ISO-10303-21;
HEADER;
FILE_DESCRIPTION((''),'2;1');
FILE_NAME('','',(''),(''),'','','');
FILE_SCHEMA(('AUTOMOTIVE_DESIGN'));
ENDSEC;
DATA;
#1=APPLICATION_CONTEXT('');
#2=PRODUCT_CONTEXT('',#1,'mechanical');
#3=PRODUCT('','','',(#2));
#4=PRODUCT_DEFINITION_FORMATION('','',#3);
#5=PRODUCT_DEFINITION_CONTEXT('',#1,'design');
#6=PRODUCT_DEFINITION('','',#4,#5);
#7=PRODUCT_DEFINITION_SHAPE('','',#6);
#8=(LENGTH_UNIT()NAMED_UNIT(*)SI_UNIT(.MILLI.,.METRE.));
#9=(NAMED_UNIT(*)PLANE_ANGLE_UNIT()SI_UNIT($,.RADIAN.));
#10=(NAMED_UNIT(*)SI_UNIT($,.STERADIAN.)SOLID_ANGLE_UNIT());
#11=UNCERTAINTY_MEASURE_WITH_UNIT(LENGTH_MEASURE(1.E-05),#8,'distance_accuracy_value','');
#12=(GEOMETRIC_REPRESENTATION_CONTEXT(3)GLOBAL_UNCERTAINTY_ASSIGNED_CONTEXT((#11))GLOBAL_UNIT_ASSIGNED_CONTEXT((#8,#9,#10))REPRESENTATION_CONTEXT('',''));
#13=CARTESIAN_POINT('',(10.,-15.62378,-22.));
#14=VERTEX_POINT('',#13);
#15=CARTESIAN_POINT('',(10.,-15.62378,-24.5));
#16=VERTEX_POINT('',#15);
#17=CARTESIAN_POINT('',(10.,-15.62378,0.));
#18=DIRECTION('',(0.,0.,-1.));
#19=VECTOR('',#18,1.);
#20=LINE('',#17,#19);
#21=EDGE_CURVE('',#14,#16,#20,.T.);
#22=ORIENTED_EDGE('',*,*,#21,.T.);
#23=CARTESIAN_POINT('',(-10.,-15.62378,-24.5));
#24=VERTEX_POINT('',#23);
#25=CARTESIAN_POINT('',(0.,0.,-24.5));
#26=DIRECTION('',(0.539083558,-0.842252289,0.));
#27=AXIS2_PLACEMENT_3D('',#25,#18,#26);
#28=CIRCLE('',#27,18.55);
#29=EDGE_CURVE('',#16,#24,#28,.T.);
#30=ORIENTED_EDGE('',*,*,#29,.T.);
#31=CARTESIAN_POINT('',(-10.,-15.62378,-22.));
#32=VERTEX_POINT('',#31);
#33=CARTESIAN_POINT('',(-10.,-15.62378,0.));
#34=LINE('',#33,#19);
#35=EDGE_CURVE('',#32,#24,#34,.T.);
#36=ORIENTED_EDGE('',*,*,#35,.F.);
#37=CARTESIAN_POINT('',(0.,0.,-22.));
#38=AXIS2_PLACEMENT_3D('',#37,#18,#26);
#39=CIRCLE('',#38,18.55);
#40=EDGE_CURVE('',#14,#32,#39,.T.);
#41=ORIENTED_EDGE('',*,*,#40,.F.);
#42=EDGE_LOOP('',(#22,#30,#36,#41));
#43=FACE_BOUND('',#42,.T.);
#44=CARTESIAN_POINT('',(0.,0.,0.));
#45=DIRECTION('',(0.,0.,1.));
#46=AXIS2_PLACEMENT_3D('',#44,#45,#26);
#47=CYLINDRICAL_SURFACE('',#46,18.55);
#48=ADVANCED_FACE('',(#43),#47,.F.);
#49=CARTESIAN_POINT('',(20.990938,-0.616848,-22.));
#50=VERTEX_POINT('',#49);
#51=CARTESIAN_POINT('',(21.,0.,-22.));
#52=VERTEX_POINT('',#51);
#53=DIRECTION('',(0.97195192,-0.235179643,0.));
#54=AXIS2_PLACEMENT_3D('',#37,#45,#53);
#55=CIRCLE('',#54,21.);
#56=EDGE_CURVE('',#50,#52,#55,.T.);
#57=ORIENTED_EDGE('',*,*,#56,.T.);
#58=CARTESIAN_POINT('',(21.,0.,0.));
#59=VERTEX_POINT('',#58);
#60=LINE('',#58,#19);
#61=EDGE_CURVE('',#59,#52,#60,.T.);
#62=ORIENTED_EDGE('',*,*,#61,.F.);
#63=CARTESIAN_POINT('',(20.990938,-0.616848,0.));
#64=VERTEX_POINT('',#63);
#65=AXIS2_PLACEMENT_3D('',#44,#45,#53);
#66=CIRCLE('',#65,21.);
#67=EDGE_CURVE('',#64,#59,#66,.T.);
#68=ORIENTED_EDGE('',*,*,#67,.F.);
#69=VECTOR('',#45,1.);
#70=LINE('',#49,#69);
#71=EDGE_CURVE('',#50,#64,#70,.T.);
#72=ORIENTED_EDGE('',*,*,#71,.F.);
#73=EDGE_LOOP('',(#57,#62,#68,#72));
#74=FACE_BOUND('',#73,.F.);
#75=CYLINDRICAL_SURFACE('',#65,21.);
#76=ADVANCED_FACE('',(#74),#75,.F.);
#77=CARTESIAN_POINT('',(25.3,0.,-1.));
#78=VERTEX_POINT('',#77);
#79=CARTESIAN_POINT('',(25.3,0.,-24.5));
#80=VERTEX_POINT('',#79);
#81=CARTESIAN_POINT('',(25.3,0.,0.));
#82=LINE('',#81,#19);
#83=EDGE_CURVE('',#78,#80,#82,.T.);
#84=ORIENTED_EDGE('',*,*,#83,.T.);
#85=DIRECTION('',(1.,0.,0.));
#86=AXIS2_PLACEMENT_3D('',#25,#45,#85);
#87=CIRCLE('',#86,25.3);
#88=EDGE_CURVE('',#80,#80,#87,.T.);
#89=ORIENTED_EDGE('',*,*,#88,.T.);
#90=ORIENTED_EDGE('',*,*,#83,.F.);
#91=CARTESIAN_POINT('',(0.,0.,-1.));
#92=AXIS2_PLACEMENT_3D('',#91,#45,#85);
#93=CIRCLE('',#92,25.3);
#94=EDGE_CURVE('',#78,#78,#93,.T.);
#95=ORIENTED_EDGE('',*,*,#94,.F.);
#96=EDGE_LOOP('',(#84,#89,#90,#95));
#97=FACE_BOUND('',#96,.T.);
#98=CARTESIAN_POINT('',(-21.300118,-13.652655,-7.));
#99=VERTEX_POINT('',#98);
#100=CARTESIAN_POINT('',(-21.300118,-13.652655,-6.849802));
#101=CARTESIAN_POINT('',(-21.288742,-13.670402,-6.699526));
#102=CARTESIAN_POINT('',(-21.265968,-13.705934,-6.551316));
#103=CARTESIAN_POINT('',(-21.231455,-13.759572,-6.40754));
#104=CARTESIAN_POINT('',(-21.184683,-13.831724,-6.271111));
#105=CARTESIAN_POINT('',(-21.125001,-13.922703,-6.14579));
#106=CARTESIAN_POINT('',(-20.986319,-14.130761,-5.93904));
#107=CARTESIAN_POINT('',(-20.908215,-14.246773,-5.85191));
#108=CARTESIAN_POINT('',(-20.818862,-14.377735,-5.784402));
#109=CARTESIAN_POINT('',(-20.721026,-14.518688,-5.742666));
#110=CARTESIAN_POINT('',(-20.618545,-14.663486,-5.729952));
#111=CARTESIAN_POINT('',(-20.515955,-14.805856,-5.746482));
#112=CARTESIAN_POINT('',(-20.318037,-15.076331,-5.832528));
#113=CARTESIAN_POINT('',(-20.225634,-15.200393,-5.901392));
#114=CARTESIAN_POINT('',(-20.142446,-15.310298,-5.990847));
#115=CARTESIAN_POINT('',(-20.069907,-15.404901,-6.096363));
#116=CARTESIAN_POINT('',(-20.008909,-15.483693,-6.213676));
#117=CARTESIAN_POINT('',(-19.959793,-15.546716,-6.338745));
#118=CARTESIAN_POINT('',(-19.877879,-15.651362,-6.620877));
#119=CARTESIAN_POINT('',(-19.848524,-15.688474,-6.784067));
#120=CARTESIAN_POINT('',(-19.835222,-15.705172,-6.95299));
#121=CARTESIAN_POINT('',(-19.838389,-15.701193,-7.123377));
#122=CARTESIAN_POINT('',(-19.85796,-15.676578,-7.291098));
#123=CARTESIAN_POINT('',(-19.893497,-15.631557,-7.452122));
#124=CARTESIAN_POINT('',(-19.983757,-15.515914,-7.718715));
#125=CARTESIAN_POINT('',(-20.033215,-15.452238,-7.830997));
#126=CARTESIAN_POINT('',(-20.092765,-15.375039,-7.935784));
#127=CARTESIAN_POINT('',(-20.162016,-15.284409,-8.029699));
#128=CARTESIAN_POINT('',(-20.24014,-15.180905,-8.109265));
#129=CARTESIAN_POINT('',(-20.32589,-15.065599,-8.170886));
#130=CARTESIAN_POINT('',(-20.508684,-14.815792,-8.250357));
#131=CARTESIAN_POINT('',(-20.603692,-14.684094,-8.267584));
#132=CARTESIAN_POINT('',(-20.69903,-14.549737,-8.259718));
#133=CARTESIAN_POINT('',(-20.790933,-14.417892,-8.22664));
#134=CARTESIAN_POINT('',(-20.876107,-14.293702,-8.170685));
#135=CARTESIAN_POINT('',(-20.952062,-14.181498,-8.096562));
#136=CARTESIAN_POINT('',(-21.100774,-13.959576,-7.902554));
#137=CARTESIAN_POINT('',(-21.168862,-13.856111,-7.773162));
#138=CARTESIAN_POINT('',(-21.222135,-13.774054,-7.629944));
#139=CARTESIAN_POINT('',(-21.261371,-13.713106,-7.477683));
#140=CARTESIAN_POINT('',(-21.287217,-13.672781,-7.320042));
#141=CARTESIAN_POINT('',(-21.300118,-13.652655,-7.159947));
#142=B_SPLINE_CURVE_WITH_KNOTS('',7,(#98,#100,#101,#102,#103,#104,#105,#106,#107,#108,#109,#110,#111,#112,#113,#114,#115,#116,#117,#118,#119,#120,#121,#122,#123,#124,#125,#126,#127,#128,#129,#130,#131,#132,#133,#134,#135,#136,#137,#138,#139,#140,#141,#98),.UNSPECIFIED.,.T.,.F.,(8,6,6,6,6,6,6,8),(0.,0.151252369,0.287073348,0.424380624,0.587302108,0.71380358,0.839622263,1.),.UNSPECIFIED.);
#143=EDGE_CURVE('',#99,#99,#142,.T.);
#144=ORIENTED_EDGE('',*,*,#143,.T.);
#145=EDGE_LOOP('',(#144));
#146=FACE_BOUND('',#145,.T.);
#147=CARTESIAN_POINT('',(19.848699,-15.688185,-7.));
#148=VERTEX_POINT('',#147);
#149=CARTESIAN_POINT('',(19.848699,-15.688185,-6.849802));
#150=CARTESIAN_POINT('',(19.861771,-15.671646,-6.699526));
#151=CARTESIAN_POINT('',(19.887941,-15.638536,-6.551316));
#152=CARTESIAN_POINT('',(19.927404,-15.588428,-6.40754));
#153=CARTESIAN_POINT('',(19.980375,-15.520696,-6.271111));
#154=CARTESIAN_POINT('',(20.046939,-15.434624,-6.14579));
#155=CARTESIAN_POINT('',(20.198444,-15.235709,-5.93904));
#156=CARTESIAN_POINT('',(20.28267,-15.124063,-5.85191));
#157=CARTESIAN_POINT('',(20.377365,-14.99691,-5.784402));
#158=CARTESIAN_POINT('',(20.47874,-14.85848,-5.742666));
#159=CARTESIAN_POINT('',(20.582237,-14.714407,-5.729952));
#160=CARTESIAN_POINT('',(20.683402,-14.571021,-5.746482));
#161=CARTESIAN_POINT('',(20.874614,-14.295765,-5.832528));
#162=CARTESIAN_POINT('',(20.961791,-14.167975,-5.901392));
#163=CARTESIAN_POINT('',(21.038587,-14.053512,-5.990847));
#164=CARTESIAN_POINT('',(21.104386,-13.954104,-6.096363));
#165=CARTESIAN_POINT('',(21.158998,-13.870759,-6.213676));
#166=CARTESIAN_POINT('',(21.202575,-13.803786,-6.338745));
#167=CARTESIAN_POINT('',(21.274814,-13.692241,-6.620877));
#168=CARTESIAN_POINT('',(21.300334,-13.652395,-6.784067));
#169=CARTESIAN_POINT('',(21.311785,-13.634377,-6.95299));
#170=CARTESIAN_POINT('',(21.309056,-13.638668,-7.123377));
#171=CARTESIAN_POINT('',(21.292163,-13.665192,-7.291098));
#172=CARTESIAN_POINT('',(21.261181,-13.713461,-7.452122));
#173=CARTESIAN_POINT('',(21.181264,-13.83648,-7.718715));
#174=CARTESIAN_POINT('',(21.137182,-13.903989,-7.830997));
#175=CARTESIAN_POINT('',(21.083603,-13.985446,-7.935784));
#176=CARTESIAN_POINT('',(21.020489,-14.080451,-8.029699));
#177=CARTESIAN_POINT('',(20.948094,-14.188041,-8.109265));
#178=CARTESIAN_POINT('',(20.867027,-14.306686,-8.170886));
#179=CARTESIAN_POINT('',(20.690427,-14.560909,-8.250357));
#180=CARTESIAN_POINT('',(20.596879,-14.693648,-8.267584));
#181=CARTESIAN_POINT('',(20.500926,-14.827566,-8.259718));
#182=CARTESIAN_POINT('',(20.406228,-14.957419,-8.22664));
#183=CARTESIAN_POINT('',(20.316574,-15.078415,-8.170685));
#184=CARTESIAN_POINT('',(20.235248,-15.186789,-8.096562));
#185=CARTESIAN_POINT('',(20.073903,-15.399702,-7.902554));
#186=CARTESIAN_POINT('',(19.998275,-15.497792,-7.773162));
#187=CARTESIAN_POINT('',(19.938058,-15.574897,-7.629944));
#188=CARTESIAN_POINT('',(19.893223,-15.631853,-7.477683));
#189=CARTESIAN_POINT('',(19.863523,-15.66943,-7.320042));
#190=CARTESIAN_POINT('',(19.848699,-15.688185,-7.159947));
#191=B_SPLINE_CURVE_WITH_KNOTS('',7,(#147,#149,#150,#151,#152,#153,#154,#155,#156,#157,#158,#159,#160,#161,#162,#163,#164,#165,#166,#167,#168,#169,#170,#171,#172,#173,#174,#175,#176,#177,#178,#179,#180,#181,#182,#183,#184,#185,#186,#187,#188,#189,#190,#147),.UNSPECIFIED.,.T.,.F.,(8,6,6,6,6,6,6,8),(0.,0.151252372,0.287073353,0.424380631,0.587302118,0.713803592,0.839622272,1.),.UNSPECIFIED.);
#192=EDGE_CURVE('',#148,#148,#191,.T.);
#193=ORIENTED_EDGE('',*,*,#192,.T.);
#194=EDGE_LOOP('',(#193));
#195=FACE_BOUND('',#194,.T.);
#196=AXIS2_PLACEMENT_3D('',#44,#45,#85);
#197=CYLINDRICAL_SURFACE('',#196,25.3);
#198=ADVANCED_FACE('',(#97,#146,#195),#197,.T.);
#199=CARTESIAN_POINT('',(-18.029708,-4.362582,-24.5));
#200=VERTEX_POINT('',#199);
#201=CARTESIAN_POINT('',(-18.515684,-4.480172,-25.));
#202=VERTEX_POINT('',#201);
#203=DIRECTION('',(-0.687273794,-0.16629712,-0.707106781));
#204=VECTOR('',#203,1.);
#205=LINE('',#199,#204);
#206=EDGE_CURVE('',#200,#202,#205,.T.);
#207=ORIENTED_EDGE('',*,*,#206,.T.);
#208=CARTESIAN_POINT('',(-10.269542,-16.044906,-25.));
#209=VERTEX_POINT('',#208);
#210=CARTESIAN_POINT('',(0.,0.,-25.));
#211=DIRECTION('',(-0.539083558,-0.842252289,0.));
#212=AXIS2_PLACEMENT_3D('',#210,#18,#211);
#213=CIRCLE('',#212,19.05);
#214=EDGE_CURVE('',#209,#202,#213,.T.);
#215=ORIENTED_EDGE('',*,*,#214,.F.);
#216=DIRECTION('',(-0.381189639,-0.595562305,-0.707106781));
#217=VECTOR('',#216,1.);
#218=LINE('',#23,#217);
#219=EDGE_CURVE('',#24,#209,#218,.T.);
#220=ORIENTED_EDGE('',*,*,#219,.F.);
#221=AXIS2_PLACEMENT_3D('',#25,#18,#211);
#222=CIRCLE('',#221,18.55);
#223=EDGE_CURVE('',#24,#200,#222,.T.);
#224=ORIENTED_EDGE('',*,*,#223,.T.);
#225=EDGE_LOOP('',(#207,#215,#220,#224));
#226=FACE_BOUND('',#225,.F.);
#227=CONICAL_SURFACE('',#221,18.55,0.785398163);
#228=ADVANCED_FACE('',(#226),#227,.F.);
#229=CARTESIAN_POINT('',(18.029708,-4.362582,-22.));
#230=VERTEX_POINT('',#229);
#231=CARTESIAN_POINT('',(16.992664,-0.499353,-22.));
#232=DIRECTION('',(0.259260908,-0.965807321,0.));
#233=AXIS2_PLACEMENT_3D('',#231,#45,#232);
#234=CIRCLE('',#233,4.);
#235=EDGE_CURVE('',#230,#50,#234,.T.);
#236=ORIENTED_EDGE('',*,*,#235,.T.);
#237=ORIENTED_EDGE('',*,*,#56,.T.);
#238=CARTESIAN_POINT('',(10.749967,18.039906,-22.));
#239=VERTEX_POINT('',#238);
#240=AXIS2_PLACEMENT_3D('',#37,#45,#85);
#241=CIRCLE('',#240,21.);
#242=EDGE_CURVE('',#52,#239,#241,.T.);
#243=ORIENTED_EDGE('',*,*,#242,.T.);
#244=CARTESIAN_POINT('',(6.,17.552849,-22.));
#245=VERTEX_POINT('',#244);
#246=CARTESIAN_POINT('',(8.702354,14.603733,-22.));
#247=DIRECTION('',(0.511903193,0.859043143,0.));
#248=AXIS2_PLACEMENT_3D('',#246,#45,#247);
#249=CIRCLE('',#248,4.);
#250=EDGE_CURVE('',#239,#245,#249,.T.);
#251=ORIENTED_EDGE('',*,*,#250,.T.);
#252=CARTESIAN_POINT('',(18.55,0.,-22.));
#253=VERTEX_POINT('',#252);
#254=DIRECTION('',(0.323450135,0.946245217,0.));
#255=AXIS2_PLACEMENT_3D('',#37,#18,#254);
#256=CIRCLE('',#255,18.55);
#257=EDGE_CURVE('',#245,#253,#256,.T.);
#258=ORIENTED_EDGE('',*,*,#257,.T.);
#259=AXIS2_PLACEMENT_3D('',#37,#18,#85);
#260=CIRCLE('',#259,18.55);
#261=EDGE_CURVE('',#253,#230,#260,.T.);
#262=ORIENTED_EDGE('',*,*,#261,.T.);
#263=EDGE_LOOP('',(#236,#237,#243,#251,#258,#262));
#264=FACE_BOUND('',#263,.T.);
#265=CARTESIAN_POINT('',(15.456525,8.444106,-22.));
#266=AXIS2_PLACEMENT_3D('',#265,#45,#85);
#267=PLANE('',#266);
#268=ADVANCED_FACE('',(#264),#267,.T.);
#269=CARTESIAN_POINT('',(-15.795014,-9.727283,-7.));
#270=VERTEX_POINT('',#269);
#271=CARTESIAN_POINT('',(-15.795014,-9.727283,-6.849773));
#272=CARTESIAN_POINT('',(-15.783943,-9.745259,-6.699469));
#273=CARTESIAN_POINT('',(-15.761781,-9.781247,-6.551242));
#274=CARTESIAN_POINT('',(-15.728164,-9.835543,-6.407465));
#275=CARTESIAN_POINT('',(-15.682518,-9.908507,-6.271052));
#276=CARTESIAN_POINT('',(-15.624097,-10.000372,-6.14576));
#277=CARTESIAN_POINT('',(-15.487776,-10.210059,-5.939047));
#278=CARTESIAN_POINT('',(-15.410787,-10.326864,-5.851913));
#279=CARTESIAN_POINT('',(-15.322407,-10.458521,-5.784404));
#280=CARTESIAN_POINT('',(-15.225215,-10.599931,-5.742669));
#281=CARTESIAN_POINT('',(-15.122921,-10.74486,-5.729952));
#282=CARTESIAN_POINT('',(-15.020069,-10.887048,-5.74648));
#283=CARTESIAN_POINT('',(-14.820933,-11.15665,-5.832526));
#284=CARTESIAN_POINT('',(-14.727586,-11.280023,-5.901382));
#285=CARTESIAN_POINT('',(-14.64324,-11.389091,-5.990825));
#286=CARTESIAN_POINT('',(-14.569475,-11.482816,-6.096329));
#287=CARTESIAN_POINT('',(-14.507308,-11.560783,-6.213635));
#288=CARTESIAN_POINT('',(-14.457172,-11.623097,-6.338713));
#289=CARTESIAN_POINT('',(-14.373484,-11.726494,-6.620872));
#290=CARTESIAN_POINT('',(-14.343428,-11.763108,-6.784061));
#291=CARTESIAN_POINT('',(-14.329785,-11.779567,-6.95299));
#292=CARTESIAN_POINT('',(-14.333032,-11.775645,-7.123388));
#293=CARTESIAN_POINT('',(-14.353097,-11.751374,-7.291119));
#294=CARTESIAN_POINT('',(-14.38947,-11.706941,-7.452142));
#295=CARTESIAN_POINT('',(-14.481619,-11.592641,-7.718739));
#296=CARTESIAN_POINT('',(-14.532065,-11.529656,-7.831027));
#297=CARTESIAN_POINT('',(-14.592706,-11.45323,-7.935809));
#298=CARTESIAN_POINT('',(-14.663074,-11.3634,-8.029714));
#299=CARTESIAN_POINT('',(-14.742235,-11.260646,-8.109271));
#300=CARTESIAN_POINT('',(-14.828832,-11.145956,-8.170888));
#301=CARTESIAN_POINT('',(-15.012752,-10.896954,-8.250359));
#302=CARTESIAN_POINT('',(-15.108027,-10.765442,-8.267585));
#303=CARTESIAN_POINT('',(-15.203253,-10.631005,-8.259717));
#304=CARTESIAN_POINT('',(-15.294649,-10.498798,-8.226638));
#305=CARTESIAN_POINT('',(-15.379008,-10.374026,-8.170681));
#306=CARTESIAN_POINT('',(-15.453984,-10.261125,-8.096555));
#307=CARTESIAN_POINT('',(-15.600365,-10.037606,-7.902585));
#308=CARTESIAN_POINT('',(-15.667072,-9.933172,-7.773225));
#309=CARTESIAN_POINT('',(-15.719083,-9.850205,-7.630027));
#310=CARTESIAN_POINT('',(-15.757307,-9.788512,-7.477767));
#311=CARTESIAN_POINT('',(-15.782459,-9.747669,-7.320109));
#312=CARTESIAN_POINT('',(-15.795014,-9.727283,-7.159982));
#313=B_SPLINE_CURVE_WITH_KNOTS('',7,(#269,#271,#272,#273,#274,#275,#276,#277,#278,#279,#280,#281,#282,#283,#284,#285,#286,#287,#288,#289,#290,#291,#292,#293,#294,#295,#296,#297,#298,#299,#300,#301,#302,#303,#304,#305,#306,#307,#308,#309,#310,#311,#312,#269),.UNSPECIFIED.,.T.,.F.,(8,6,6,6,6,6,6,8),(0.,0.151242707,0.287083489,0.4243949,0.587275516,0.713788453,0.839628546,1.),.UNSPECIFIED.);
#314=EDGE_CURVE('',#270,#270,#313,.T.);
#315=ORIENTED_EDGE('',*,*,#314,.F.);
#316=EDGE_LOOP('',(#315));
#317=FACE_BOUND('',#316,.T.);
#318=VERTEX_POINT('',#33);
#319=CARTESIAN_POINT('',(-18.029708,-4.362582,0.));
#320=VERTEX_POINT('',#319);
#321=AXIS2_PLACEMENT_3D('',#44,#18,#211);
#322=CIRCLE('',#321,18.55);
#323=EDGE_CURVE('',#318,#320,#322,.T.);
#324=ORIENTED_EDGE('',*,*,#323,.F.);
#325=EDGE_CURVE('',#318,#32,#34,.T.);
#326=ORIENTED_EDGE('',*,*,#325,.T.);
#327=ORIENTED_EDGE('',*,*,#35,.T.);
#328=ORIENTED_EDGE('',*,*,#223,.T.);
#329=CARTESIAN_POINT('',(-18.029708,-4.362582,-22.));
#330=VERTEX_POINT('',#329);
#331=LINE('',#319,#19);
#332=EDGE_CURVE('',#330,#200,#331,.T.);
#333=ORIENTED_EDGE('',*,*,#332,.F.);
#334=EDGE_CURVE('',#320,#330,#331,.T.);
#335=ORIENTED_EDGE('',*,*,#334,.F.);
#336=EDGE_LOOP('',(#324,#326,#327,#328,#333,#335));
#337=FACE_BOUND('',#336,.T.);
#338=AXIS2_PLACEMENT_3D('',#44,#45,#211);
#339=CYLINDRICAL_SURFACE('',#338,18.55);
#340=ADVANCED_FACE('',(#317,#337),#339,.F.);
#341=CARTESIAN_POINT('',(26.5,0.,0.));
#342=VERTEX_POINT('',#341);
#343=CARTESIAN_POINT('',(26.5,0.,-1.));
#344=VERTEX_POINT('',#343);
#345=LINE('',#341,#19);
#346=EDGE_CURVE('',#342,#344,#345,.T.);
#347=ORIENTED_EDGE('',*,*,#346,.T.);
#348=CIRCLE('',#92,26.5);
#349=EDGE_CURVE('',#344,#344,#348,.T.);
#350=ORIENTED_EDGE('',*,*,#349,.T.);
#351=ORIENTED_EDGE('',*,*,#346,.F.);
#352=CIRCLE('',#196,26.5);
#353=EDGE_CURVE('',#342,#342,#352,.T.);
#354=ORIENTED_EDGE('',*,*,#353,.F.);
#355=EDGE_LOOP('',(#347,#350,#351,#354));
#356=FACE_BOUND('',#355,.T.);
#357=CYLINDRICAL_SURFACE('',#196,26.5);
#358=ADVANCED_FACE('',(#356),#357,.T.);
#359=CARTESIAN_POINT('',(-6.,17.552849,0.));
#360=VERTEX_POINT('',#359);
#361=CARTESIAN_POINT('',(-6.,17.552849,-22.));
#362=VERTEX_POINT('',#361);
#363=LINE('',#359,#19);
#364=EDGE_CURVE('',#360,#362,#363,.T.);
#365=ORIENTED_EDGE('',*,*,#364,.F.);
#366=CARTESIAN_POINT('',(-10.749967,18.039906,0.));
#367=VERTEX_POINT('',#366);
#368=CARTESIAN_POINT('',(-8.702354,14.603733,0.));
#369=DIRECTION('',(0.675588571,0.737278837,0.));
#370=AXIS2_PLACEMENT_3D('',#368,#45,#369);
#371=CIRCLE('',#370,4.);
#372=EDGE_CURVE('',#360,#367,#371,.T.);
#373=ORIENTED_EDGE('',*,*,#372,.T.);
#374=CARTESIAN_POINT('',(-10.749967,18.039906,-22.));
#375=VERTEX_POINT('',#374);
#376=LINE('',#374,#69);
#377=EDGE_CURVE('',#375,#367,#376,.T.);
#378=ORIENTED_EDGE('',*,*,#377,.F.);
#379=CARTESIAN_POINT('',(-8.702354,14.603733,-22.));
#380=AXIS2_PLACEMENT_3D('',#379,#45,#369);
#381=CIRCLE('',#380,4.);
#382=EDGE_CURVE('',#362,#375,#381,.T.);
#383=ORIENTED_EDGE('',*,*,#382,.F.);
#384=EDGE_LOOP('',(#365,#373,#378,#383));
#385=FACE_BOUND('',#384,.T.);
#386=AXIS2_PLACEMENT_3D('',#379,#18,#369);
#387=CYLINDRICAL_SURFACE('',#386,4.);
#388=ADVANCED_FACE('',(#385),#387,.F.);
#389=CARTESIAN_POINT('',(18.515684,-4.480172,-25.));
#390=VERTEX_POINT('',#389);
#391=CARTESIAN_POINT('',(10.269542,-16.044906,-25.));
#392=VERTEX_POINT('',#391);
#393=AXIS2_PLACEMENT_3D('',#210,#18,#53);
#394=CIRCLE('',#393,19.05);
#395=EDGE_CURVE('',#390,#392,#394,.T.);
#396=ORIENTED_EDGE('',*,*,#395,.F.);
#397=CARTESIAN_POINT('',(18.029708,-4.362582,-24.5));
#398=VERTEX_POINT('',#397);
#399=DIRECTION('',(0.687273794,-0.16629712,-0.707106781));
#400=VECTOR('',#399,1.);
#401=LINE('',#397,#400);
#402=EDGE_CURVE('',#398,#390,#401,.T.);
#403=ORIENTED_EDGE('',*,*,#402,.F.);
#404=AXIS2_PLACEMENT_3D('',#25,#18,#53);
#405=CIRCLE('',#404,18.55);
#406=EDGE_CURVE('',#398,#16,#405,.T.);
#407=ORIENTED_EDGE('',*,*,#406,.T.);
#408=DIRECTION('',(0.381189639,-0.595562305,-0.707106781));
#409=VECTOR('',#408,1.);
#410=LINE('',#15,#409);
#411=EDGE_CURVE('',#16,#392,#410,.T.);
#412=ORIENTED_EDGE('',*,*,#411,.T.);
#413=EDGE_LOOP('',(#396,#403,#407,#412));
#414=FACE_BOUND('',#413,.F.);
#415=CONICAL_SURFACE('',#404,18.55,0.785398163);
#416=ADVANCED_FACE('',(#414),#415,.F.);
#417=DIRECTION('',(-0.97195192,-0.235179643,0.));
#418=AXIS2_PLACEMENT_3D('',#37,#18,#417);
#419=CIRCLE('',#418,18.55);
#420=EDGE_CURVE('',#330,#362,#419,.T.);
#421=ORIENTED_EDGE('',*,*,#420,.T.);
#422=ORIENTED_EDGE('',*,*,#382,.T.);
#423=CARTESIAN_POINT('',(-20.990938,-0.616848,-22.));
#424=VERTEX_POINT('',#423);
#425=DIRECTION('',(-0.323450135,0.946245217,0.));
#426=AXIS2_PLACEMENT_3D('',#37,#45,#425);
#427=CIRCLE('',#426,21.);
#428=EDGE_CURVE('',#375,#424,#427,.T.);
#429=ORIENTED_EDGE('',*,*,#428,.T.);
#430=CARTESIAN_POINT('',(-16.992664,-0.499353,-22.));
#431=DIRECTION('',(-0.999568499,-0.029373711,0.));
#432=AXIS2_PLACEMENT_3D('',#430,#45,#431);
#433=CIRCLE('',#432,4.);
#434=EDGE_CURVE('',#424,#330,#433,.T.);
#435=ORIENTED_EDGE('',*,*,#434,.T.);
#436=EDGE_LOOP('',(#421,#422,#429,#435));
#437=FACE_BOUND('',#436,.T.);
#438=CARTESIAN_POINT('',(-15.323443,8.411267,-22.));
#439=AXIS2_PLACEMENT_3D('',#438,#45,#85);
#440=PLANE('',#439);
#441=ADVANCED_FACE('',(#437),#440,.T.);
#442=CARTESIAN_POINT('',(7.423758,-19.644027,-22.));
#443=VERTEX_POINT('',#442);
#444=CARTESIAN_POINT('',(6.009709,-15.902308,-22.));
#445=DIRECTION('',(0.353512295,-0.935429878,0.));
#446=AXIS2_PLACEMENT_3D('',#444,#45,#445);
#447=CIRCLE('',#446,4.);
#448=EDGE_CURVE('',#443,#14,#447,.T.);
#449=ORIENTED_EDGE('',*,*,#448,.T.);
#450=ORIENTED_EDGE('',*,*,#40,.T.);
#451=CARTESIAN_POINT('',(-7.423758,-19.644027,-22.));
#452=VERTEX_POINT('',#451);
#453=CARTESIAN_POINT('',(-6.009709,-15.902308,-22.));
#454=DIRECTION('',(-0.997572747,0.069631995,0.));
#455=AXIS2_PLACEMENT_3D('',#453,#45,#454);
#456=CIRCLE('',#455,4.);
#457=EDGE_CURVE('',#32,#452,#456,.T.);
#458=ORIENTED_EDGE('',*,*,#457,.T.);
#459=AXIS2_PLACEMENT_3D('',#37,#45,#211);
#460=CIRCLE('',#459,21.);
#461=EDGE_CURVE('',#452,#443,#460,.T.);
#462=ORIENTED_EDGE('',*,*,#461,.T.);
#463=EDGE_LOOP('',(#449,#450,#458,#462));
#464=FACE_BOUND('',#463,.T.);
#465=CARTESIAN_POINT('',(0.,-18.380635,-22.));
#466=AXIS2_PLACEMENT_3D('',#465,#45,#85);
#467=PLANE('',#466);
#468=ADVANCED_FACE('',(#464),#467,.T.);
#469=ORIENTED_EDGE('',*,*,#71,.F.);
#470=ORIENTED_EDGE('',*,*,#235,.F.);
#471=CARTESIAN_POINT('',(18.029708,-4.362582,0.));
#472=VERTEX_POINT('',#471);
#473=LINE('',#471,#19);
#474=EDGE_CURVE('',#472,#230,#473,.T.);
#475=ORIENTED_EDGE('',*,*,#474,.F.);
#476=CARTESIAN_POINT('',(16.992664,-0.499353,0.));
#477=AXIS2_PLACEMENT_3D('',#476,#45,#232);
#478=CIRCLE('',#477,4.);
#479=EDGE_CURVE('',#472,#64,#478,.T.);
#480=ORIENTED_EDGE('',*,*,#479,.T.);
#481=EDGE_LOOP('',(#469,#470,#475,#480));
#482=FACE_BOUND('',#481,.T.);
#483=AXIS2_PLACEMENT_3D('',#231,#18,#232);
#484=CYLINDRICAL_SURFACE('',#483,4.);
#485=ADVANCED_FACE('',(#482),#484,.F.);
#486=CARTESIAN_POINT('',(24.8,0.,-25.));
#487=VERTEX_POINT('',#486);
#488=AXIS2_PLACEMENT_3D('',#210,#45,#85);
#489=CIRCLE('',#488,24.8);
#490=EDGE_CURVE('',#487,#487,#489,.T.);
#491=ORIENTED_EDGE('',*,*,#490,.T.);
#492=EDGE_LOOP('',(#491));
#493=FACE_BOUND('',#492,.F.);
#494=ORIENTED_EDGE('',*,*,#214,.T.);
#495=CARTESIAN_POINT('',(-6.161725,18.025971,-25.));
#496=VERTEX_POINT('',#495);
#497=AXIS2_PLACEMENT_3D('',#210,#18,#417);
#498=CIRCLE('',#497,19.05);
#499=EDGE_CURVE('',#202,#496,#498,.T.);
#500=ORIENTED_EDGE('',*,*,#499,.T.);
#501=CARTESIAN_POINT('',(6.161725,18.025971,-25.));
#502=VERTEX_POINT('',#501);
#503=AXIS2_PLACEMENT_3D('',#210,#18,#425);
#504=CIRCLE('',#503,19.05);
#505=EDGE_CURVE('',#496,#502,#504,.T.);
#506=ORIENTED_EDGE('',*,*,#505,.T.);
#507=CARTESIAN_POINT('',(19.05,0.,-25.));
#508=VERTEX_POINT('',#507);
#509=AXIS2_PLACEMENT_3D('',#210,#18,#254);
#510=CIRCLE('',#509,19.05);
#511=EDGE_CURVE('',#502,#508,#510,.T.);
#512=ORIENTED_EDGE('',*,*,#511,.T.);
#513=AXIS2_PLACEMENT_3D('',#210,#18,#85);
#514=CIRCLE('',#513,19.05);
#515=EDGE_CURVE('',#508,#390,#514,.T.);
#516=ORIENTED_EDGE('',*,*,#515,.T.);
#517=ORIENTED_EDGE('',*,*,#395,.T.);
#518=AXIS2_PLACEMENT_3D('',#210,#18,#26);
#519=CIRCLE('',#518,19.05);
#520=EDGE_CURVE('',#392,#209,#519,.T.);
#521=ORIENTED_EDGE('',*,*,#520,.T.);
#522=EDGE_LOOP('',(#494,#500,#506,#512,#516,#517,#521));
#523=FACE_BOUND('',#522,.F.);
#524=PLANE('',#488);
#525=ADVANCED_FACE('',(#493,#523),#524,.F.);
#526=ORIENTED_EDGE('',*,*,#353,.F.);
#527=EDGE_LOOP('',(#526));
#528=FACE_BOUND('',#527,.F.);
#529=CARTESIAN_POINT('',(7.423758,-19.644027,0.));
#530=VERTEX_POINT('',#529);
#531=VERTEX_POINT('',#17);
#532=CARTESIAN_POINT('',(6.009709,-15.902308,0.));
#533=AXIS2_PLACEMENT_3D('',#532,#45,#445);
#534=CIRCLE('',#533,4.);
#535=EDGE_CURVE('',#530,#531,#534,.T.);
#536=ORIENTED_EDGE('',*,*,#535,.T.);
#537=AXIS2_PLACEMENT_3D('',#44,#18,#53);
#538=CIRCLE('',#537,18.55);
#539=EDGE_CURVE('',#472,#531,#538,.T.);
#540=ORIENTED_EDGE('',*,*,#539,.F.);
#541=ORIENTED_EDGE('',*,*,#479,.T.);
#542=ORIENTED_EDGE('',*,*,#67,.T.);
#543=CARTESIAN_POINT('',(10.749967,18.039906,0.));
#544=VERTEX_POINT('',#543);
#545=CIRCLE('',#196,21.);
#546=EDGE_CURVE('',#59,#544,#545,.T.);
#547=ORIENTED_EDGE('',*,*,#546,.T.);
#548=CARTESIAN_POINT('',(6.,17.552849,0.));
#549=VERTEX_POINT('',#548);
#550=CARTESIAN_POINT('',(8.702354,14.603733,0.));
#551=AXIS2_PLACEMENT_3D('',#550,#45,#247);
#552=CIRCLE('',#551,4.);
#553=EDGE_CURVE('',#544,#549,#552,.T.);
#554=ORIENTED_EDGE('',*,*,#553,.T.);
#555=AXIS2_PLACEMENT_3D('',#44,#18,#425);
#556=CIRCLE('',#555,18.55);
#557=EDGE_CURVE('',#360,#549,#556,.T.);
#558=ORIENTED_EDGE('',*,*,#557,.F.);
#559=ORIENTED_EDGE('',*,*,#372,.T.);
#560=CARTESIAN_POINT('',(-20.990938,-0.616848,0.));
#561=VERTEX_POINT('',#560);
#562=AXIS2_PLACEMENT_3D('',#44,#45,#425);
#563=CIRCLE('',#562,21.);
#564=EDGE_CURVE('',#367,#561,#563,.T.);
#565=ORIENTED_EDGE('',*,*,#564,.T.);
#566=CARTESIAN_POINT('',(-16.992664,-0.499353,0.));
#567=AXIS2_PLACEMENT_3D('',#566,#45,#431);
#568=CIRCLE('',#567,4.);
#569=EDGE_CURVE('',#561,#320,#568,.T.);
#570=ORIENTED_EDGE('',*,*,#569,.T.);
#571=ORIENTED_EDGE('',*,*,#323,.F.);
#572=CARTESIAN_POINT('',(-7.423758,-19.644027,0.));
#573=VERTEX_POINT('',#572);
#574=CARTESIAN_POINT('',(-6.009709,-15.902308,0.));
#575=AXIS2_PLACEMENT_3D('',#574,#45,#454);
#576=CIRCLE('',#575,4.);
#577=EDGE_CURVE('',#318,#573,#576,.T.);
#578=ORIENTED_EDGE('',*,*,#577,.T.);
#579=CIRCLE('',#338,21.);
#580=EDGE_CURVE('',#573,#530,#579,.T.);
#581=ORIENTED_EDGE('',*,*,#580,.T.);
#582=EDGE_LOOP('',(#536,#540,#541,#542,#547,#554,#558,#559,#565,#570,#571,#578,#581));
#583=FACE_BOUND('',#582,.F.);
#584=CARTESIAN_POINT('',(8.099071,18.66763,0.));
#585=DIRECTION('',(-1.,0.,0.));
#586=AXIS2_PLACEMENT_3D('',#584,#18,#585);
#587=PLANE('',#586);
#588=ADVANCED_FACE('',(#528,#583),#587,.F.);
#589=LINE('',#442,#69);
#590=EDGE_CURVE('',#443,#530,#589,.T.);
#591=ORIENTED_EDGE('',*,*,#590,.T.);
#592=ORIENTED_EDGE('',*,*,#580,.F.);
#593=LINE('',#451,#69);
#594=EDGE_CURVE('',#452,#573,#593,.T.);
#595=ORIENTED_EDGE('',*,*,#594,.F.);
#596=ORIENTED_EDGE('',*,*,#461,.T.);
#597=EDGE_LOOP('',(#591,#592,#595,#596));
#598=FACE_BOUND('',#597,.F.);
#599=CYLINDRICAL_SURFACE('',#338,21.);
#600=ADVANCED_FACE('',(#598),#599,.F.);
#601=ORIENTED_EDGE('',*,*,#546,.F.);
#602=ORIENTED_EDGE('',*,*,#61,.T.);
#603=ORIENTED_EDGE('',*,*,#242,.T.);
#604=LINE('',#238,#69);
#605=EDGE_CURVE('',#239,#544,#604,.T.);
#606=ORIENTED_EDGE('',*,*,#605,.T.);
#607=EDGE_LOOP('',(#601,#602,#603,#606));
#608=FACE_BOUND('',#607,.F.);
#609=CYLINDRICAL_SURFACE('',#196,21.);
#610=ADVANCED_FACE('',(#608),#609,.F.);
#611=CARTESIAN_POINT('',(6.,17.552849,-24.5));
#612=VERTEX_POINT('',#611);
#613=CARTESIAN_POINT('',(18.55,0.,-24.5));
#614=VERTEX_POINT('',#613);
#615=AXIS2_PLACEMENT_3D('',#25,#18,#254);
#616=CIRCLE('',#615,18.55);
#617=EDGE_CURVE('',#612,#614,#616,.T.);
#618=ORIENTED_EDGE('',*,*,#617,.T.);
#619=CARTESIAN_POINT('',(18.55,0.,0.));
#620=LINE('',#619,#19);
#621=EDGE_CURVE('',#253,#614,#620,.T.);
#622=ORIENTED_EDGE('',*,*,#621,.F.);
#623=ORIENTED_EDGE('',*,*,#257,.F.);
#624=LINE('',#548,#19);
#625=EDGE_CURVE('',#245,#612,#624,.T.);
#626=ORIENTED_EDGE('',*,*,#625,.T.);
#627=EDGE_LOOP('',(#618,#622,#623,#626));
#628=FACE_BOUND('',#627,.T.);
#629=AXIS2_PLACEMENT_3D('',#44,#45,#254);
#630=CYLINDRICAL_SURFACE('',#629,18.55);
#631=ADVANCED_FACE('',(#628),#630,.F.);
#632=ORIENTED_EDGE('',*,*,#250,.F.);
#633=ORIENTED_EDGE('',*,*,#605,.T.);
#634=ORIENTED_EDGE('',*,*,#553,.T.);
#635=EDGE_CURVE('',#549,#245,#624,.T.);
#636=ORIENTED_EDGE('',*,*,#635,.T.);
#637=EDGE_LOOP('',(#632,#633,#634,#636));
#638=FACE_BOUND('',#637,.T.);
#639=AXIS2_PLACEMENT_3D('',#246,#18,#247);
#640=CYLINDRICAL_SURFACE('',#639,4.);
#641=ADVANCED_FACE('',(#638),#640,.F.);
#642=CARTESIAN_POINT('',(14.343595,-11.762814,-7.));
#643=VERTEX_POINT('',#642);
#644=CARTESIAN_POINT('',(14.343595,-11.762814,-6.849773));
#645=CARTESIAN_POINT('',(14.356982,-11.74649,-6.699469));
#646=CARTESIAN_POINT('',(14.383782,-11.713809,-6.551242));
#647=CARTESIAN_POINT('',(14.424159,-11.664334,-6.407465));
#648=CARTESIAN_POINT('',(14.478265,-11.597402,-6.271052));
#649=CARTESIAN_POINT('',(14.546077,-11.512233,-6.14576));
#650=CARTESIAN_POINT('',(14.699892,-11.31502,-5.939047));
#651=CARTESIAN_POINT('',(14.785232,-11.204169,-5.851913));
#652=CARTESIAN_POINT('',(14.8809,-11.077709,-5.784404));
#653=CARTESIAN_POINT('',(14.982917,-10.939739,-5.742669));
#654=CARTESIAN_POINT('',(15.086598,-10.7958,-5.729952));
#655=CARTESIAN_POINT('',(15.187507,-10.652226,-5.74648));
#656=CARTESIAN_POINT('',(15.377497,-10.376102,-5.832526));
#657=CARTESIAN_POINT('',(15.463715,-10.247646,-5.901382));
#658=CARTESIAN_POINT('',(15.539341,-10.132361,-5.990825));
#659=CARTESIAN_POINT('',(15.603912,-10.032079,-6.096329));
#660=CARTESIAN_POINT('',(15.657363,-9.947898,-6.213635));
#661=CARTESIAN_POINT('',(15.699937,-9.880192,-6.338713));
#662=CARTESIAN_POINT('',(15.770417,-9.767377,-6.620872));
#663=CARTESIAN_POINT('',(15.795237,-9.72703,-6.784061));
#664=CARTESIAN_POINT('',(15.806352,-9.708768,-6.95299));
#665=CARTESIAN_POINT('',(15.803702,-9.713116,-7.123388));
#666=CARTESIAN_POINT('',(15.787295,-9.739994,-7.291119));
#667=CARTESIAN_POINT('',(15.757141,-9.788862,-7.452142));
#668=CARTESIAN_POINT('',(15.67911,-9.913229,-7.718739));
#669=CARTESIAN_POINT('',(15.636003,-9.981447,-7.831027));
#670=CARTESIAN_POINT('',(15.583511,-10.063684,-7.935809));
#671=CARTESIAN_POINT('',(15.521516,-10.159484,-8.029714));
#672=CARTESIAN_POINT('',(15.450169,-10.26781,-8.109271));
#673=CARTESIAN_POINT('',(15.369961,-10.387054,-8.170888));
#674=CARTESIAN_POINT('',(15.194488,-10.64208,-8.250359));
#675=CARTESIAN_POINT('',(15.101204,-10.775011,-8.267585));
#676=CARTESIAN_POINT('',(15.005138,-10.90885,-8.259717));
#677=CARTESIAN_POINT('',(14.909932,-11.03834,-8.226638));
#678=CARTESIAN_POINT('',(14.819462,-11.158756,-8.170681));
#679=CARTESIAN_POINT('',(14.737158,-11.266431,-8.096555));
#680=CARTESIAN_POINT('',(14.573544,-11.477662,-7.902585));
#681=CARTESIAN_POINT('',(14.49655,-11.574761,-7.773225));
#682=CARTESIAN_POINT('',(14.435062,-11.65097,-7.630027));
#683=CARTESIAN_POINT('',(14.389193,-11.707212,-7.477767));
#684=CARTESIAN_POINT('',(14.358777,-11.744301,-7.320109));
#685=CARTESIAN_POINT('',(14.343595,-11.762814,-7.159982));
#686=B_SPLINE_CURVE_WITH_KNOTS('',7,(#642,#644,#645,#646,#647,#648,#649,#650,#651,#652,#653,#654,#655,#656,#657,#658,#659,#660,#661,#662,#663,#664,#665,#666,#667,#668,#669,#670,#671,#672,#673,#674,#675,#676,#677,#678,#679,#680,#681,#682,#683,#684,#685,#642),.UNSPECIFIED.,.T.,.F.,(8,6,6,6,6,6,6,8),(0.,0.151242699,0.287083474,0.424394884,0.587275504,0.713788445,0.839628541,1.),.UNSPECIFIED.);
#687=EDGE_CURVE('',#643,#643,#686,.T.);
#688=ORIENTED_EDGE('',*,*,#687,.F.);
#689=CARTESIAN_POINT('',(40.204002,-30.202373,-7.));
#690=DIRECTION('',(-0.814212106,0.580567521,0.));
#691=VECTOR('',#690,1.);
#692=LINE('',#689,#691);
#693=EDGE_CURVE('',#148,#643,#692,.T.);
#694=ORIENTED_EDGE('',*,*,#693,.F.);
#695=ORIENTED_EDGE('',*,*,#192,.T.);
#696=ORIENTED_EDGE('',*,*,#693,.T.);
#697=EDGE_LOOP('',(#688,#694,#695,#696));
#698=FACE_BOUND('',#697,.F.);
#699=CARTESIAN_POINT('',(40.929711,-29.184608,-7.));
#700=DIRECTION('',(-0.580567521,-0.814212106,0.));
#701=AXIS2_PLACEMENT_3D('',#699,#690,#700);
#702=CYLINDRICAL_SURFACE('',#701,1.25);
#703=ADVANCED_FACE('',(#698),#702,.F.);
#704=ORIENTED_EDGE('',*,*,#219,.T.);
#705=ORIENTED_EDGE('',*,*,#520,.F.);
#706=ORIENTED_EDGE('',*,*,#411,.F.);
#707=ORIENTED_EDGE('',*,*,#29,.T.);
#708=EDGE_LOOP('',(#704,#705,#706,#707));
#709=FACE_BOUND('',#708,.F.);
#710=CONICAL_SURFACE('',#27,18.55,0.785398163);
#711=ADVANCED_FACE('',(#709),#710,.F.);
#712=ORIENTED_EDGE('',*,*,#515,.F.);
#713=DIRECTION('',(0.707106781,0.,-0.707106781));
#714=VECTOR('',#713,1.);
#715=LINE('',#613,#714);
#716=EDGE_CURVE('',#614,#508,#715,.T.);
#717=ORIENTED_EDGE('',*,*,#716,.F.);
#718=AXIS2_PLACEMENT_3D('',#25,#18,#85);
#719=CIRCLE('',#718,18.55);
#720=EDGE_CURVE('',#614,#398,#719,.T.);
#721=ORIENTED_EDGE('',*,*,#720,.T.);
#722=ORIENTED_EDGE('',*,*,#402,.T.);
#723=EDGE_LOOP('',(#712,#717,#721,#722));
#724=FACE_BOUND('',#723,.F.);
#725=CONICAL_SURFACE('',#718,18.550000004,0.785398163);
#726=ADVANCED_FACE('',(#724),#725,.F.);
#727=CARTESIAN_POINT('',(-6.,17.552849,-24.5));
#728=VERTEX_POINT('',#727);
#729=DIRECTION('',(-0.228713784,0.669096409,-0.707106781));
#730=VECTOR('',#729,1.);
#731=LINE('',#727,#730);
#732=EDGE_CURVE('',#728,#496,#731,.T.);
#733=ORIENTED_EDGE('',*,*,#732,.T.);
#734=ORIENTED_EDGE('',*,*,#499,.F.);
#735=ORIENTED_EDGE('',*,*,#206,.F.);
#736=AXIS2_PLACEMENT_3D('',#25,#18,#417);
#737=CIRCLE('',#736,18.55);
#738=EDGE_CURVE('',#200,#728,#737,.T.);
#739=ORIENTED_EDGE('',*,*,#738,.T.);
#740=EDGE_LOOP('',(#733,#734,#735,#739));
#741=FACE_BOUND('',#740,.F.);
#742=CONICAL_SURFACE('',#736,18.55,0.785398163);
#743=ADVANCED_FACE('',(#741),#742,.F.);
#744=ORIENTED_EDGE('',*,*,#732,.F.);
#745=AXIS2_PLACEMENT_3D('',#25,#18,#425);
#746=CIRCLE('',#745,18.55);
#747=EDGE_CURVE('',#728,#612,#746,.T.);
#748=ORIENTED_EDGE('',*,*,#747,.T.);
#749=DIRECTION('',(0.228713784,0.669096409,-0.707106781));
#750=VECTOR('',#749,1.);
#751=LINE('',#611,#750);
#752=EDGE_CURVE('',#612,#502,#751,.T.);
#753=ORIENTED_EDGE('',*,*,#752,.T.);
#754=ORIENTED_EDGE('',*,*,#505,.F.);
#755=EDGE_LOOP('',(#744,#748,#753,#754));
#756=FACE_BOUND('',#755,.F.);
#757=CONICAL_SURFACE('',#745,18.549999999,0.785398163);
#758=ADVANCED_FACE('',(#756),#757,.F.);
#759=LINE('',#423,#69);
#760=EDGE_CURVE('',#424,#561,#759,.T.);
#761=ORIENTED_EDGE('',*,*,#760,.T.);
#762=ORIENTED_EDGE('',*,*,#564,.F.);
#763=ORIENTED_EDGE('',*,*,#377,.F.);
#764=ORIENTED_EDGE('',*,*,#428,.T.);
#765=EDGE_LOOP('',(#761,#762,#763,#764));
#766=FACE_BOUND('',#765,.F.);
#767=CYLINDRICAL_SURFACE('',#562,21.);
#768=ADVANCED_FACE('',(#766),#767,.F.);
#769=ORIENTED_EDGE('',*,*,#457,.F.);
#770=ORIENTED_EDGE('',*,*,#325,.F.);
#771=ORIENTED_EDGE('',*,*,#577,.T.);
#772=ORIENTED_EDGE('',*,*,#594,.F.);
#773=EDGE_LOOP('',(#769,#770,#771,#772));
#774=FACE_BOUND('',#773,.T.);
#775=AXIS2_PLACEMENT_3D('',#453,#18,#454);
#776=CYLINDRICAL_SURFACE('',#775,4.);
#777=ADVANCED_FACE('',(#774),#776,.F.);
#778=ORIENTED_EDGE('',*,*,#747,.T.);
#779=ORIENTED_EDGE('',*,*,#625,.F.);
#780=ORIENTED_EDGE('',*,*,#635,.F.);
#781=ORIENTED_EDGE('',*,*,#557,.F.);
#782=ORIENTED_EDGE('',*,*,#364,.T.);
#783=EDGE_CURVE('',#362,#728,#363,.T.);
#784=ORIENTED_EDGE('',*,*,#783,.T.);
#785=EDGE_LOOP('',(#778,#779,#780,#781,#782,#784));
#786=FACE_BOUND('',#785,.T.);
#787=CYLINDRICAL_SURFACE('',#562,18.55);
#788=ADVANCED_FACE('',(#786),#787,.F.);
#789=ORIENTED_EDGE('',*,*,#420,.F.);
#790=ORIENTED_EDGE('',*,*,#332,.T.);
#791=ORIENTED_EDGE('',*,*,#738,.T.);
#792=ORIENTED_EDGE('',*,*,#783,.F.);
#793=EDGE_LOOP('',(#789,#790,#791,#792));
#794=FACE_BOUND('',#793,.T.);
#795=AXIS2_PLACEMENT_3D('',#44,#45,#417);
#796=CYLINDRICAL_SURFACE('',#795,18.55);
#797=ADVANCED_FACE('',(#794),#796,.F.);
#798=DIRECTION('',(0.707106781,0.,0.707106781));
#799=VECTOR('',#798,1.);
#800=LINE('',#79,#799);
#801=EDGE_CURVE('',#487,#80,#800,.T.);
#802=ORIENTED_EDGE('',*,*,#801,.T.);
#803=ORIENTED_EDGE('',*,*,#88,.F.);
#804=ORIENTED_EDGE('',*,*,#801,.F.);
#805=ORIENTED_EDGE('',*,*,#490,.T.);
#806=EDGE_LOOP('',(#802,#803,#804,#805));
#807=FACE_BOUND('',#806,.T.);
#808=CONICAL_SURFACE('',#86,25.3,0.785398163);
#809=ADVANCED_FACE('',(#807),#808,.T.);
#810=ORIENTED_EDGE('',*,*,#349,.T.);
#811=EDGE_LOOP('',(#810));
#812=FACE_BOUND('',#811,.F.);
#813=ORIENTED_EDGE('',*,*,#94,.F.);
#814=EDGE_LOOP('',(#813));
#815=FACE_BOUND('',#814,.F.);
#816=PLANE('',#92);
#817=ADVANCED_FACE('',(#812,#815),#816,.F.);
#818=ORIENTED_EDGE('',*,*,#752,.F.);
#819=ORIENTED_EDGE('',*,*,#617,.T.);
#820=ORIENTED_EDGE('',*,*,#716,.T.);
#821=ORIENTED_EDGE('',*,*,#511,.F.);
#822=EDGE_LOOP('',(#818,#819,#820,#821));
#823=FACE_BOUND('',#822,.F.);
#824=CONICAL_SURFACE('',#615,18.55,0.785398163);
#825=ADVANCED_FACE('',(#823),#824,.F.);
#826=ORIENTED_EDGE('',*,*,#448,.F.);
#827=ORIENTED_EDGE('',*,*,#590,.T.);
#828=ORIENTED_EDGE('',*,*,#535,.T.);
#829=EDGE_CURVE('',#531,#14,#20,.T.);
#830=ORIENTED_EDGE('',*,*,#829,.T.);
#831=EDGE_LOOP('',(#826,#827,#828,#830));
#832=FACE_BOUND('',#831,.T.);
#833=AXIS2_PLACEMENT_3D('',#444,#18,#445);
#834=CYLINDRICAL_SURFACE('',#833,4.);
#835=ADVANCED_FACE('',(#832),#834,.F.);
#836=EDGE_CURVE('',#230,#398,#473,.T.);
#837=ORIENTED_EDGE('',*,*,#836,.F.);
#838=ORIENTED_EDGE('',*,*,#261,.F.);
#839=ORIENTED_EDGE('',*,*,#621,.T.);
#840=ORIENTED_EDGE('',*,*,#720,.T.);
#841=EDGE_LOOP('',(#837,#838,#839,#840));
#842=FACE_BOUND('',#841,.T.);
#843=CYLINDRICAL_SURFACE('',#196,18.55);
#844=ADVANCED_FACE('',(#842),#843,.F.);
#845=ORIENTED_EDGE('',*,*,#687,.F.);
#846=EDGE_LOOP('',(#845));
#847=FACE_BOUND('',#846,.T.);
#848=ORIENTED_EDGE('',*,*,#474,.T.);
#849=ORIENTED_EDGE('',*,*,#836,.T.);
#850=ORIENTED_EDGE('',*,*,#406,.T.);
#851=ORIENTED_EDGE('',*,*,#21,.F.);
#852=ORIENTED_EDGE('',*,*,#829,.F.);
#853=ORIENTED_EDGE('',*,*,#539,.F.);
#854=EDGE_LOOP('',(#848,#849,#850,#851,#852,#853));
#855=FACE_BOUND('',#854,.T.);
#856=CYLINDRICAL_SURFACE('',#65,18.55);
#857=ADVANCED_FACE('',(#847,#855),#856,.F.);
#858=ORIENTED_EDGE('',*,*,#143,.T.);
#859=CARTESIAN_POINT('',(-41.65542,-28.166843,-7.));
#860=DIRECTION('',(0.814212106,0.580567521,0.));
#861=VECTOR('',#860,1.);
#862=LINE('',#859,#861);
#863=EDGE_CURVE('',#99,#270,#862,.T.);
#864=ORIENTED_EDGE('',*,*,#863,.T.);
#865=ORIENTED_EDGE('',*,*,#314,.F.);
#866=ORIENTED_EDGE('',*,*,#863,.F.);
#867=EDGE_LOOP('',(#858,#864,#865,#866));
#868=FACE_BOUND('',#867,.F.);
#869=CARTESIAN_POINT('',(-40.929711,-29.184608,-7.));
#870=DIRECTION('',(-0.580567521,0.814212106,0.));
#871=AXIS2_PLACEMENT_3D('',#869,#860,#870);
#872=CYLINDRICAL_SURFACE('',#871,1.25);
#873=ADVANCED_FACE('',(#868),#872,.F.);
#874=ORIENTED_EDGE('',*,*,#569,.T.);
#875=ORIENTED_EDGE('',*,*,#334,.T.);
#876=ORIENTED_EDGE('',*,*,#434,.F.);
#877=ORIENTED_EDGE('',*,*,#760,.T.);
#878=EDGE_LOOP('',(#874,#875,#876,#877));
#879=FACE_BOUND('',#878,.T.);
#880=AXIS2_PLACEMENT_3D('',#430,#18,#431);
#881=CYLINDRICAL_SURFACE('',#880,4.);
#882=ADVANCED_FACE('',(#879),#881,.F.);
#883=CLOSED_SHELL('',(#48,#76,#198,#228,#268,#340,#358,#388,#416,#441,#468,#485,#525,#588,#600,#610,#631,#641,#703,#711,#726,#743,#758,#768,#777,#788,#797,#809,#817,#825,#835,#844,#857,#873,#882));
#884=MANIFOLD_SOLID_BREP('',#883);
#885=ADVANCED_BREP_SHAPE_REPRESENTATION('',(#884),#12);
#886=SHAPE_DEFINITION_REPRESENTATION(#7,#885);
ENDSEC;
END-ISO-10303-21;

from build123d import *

# Parameters (mm, degrees)
F0_R           = 26.5
F0_R_2         = 25.3
F1_DEPTH       = 1
F2_DEPTH       = 25
F3_DEPTH       = 22
F4_T1_DEPTH    = 22
F9_D           = 2.5
F9_DEPTH       = 25
F9_START       = 1.2308984
F9_TIP         = 0.7510757738
F9_ON_F7_D     = 2.5
F9_ON_F7_DEPTH = 25
F9_ON_F7_START = 1.2308984
F9_ON_F7_TIP   = 0.7510757738
F10_SIZE       = 0.5


# Not quite as in the source:
# - a fillet or chamfer that OpenCascade refuses, or shapes differently, is made with other operations: its cross-section is extruded or revolved along the edge and cut away or added


with BuildPart() as f1:
    # F0 (on Top) → F1 (new body)
    with BuildSketch(Plane.XY):
        Circle(F0_R)
        Circle(F0_R_2, mode=Mode.SUBTRACT)
        Circle(F0_R_2)
        with BuildLine():
            ThreePointArc((-6.7924528302, 19.8711495528), (0, 21), (6.7924528302, 19.8711495528))
            ThreePointArc((6.7924528302, 19.8711495528), (17.0827619171, 12.2138955818), (21, 0))
            ThreePointArc((21, 0), (20.8522276614, -2.4868859159), (20.4109903277, -4.9387725035))
            ThreePointArc((20.4109903277, -4.9387725035), (17.0984542242, -12.1919179436), (11.320754717, -17.6872980593))
            ThreePointArc((11.320754717, -17.6872980593), (0, -21), (-11.320754717, -17.6872980593))
            ThreePointArc((-11.320754717, -17.6872980593), (-17.0984542242, -12.1919179436), (-20.4109903277, -4.9387725035))
            ThreePointArc((-20.4109903277, -4.9387725035), (-18.4089621658, 10.1049548232), (-6.7924528302, 19.8711495528))
        make_face(mode=Mode.SUBTRACT)
    extrude(amount=-F1_DEPTH)

    # F0 (on Top) → F2 (join)
    with BuildSketch(Plane.XY):
        Circle(F0_R_2)
        with BuildLine():
            ThreePointArc((-6.7924528302, 19.8711495528), (0, 21), (6.7924528302, 19.8711495528))
            ThreePointArc((6.7924528302, 19.8711495528), (17.0827619171, 12.2138955818), (21, 0))
            ThreePointArc((21, 0), (20.8522276614, -2.4868859159), (20.4109903277, -4.9387725035))
            ThreePointArc((20.4109903277, -4.9387725035), (17.0984542242, -12.1919179436), (11.320754717, -17.6872980593))
            ThreePointArc((11.320754717, -17.6872980593), (0, -21), (-11.320754717, -17.6872980593))
            ThreePointArc((-11.320754717, -17.6872980593), (-17.0984542242, -12.1919179436), (-20.4109903277, -4.9387725035))
            ThreePointArc((-20.4109903277, -4.9387725035), (-18.4089621658, 10.1049548232), (-6.7924528302, 19.8711495528))
        make_face(mode=Mode.SUBTRACT)
        with BuildLine():
            Line((20.4109903277, -4.9387725035), (18.0297081228, -4.3625823781))
            ThreePointArc((18.0297081228, -4.3625823781), (15.1036345647, -10.7695275168), (10, -15.6237799524))
            Line((10, -15.6237799524), (11.320754717, -17.6872980593))
            ThreePointArc((11.320754717, -17.6872980593), (17.0984542242, -12.1919179436), (20.4109903277, -4.9387725035))
        make_face()
        with BuildLine():
            ThreePointArc((6, 17.5528487716), (15.0897730268, 10.7889410973), (18.55, 0))
            ThreePointArc((18.55, 0), (18.4194677675, -2.1967492257), (18.0297081228, -4.3625823781))
            Line((18.0297081228, -4.3625823781), (20.4109903277, -4.9387725035))
            ThreePointArc((20.4109903277, -4.9387725035), (20.8522276614, -2.4868859159), (21, 0))
            ThreePointArc((21, 0), (17.0827619171, 12.2138955818), (6.7924528302, 19.8711495528))
            Line((6.7924528302, 19.8711495528), (6, 17.5528487716))
        make_face()
        with BuildLine():
            ThreePointArc((-6, 17.5528487716), (0, 18.55), (6, 17.5528487716))
            Line((6, 17.5528487716), (6.7924528302, 19.8711495528))
            ThreePointArc((6.7924528302, 19.8711495528), (0, 21), (-6.7924528302, 19.8711495528))
            Line((-6.7924528302, 19.8711495528), (-6, 17.5528487716))
        make_face()
        with BuildLine():
            ThreePointArc((-18.0297081228, -4.3625823781), (-16.2612499131, 8.9260434271), (-6, 17.5528487716))
            Line((-6, 17.5528487716), (-6.7924528302, 19.8711495528))
            ThreePointArc((-6.7924528302, 19.8711495528), (-18.4089621658, 10.1049548232), (-20.4109903277, -4.9387725035))
            Line((-20.4109903277, -4.9387725035), (-18.0297081228, -4.3625823781))
        make_face()
        with BuildLine():
            ThreePointArc((-10, -15.6237799524), (-15.1036345647, -10.7695275168), (-18.0297081228, -4.3625823781))
            Line((-18.0297081228, -4.3625823781), (-20.4109903277, -4.9387725035))
            ThreePointArc((-20.4109903277, -4.9387725035), (-17.0984542242, -12.1919179436), (-11.320754717, -17.6872980593))
            Line((-11.320754717, -17.6872980593), (-10, -15.6237799524))
        make_face()
        with BuildLine():
            Line((11.320754717, -17.6872980593), (10, -15.6237799524))
            ThreePointArc((10, -15.6237799524), (0, -18.55), (-10, -15.6237799524))
            Line((-10, -15.6237799524), (-11.320754717, -17.6872980593))
            ThreePointArc((-11.320754717, -17.6872980593), (0, -21), (11.320754717, -17.6872980593))
        make_face()
    extrude(amount=-F2_DEPTH)

    # F0 (on Top) → F3 (cut)
    with BuildSketch(Plane.XY):
        with BuildLine():
            ThreePointArc((6, 17.5528487716), (15.0897730268, 10.7889410973), (18.55, 0))
            ThreePointArc((18.55, 0), (18.4194677675, -2.1967492257), (18.0297081228, -4.3625823781))
            Line((18.0297081228, -4.3625823781), (20.4109903277, -4.9387725035))
            ThreePointArc((20.4109903277, -4.9387725035), (20.8522276614, -2.4868859159), (21, 0))
            ThreePointArc((21, 0), (17.0827619171, 12.2138955818), (6.7924528302, 19.8711495528))
            Line((6.7924528302, 19.8711495528), (6, 17.5528487716))
        make_face()
        with BuildLine():
            Line((11.320754717, -17.6872980593), (10, -15.6237799524))
            ThreePointArc((10, -15.6237799524), (0, -18.55), (-10, -15.6237799524))
            Line((-10, -15.6237799524), (-11.320754717, -17.6872980593))
            ThreePointArc((-11.320754717, -17.6872980593), (0, -21), (11.320754717, -17.6872980593))
        make_face()
        with BuildLine():
            ThreePointArc((-18.0297081228, -4.3625823781), (-16.2612499131, 8.9260434271), (-6, 17.5528487716))
            Line((-6, 17.5528487716), (-6.7924528302, 19.8711495528))
            ThreePointArc((-6.7924528302, 19.8711495528), (-18.4089621658, 10.1049548232), (-20.4109903277, -4.9387725035))
            Line((-20.4109903277, -4.9387725035), (-18.0297081228, -4.3625823781))
        make_face()
    extrude(amount=-F3_DEPTH, mode=Mode.SUBTRACT)

    # F4: fillet of radius 4 on 6 edges, made by hand

    # F4_s2 → F4_t1 (join)
    with BuildSketch(Plane.XY.offset(-22)):
        with BuildLine():
            ThreePointArc((10.7499670552, 18.0399059951), (8.2943373762, 18.582869286), (6, 17.5528487716))
            Line((6, 17.5528487716), (5.9459529143, 17.6118310786))
            ThreePointArc((5.9459529143, 17.6118310786), (6.3205267978, 18.737875173), (6.7167532128, 19.8970255636))
            Line((6.7167532128, 19.8970255636), (6.818328841, 19.9468491701))
            ThreePointArc((6.818328841, 19.9468491701), (8.852466778, 19.1311325317), (10.7909193107, 18.1086294465))
            Line((10.7909193107, 18.1086294465), (10.7499670552, 18.0399059951))
        make_face()
        with BuildLine():
            ThreePointArc((-6, 17.5528487716), (-8.2943373762, 18.582869286), (-10.7499670552, 18.0399059951))
            Line((-10.7499670552, 18.0399059951), (-10.7909193107, 18.1086294465))
            ThreePointArc((-10.7909193107, 18.1086294465), (-8.852466778, 19.1311325317), (-6.818328841, 19.9468491701))
            Line((-6.818328841, 19.9468491701), (-6.7167532128, 19.8970255636))
            ThreePointArc((-6.7167532128, 19.8970255636), (-6.3205267978, 18.737875173), (-5.9459529143, 17.6118310786))
            Line((-5.9459529143, 17.6118310786), (-6, 17.5528487716))
        make_face()
        with BuildLine():
            ThreePointArc((18.0297081228, -4.3625823781), (20.1305359874, -2.9800309182), (20.9909384883, -0.6168479392))
            Line((20.9909384883, -0.6168479392), (21.0709039683, -0.6191978361))
            ThreePointArc((21.0709039683, -0.6191978361), (20.8927389597, -2.8035439649), (20.4887464814, -4.957586875))
            Line((20.4887464814, -4.957586875), (20.3921759563, -5.0165286572))
            ThreePointArc((20.3921759563, -5.0165286572), (19.2015348538, -4.7284335945), (18.0504489955, -4.4398469638))
            Line((18.0504489955, -4.4398469638), (18.0297081228, -4.3625823781))
        make_face()
        with BuildLine():
            ThreePointArc((7.423758192, -19.6440274462), (9.3775452078, -18.0604736729), (10, -15.6237799524))
            Line((10, -15.6237799524), (10.0798058197, -15.6182093928))
            ThreePointArc((10.0798058197, -15.6182093928), (10.7277575416, -16.6124123212), (11.3881349001, -17.6441713746))
            Line((11.3881349001, -17.6441713746), (11.3638814016, -17.7546782424))
            ThreePointArc((11.3638814016, -17.7546782424), (9.4590814084, -18.8385821895), (7.4520391756, -19.7188618365))
            Line((7.4520391756, -19.7188618365), (7.423758192, -19.6440274462))
        make_face()
        with BuildLine():
            ThreePointArc((-10, -15.6237799524), (-9.3775452078, -18.0604736729), (-7.423758192, -19.6440274462))
            Line((-7.423758192, -19.6440274462), (-7.4520391756, -19.7188618365))
            ThreePointArc((-7.4520391756, -19.7188618365), (-9.4590814084, -18.8385821895), (-11.3638814016, -17.7546782424))
            Line((-11.3638814016, -17.7546782424), (-11.3881349001, -17.6441713746))
            ThreePointArc((-11.3881349001, -17.6441713746), (-10.7277575416, -16.6124123212), (-10.0798058197, -15.6182093928))
            Line((-10.0798058197, -15.6182093928), (-10, -15.6237799524))
        make_face()
        with BuildLine():
            ThreePointArc((-20.9909384883, -0.6168479392), (-20.1305359874, -2.9800309182), (-18.0297081228, -4.3625823781))
            Line((-18.0297081228, -4.3625823781), (-18.0504489955, -4.4398469638))
            ThreePointArc((-18.0504489955, -4.4398469638), (-19.2015348538, -4.7284335945), (-20.3921759563, -5.0165286572))
            Line((-20.3921759563, -5.0165286572), (-20.4887464814, -4.957586875))
            ThreePointArc((-20.4887464814, -4.957586875), (-20.8927389597, -2.8035439649), (-21.0709039683, -0.6191978361))
            Line((-21.0709039683, -0.6191978361), (-20.9909384883, -0.6168479392))
        make_face()
    extrude(amount=F4_T1_DEPTH)

    # F9
    # its depths count from where the whole tool has entered the part; down to there all is cleared
    with Locations(Plane(origin=(-21.5766208067, -15.3850393098, 0), x_dir=(0.5805675211, -0.8142121059, 0), z_dir=(-0.8142121059, -0.5805675211, 0)).offset(-F9_START)):
        with Locations((0, -7)):
            Hole(F9_D / 2, depth=F9_DEPTH)
            with Locations((0, 0, -(F9_DEPTH + F9_TIP / 2))):  # 118° drill point
                Cone(0, F9_D / 2, F9_TIP, mode=Mode.SUBTRACT)

    # F9 on F7
    # its depths count from where the whole tool has entered the part; down to there all is cleared
    with Locations(Plane(origin=(21.5766208067, -15.3850393098, 0), x_dir=(0.5805675211, 0.8142121059, 0), z_dir=(0.8142121059, -0.5805675211, 0)).offset(-F9_ON_F7_START)):
        with Locations((0, -7)):
            Hole(F9_ON_F7_D / 2, depth=F9_ON_F7_DEPTH)
            with Locations((0, 0, -(F9_ON_F7_DEPTH + F9_ON_F7_TIP / 2))):  # 118° drill point
                Cone(0, F9_ON_F7_D / 2, F9_ON_F7_TIP, mode=Mode.SUBTRACT)

    # F10
    f10_edges = [f1.edges().sort_by_distance(p)[0] for p in [
        (-10, 15.62378, -25),
        (-25.3, 0, -25),
    ]]
    chamfer(f10_edges, length=F10_SIZE)


solid = f1.part
